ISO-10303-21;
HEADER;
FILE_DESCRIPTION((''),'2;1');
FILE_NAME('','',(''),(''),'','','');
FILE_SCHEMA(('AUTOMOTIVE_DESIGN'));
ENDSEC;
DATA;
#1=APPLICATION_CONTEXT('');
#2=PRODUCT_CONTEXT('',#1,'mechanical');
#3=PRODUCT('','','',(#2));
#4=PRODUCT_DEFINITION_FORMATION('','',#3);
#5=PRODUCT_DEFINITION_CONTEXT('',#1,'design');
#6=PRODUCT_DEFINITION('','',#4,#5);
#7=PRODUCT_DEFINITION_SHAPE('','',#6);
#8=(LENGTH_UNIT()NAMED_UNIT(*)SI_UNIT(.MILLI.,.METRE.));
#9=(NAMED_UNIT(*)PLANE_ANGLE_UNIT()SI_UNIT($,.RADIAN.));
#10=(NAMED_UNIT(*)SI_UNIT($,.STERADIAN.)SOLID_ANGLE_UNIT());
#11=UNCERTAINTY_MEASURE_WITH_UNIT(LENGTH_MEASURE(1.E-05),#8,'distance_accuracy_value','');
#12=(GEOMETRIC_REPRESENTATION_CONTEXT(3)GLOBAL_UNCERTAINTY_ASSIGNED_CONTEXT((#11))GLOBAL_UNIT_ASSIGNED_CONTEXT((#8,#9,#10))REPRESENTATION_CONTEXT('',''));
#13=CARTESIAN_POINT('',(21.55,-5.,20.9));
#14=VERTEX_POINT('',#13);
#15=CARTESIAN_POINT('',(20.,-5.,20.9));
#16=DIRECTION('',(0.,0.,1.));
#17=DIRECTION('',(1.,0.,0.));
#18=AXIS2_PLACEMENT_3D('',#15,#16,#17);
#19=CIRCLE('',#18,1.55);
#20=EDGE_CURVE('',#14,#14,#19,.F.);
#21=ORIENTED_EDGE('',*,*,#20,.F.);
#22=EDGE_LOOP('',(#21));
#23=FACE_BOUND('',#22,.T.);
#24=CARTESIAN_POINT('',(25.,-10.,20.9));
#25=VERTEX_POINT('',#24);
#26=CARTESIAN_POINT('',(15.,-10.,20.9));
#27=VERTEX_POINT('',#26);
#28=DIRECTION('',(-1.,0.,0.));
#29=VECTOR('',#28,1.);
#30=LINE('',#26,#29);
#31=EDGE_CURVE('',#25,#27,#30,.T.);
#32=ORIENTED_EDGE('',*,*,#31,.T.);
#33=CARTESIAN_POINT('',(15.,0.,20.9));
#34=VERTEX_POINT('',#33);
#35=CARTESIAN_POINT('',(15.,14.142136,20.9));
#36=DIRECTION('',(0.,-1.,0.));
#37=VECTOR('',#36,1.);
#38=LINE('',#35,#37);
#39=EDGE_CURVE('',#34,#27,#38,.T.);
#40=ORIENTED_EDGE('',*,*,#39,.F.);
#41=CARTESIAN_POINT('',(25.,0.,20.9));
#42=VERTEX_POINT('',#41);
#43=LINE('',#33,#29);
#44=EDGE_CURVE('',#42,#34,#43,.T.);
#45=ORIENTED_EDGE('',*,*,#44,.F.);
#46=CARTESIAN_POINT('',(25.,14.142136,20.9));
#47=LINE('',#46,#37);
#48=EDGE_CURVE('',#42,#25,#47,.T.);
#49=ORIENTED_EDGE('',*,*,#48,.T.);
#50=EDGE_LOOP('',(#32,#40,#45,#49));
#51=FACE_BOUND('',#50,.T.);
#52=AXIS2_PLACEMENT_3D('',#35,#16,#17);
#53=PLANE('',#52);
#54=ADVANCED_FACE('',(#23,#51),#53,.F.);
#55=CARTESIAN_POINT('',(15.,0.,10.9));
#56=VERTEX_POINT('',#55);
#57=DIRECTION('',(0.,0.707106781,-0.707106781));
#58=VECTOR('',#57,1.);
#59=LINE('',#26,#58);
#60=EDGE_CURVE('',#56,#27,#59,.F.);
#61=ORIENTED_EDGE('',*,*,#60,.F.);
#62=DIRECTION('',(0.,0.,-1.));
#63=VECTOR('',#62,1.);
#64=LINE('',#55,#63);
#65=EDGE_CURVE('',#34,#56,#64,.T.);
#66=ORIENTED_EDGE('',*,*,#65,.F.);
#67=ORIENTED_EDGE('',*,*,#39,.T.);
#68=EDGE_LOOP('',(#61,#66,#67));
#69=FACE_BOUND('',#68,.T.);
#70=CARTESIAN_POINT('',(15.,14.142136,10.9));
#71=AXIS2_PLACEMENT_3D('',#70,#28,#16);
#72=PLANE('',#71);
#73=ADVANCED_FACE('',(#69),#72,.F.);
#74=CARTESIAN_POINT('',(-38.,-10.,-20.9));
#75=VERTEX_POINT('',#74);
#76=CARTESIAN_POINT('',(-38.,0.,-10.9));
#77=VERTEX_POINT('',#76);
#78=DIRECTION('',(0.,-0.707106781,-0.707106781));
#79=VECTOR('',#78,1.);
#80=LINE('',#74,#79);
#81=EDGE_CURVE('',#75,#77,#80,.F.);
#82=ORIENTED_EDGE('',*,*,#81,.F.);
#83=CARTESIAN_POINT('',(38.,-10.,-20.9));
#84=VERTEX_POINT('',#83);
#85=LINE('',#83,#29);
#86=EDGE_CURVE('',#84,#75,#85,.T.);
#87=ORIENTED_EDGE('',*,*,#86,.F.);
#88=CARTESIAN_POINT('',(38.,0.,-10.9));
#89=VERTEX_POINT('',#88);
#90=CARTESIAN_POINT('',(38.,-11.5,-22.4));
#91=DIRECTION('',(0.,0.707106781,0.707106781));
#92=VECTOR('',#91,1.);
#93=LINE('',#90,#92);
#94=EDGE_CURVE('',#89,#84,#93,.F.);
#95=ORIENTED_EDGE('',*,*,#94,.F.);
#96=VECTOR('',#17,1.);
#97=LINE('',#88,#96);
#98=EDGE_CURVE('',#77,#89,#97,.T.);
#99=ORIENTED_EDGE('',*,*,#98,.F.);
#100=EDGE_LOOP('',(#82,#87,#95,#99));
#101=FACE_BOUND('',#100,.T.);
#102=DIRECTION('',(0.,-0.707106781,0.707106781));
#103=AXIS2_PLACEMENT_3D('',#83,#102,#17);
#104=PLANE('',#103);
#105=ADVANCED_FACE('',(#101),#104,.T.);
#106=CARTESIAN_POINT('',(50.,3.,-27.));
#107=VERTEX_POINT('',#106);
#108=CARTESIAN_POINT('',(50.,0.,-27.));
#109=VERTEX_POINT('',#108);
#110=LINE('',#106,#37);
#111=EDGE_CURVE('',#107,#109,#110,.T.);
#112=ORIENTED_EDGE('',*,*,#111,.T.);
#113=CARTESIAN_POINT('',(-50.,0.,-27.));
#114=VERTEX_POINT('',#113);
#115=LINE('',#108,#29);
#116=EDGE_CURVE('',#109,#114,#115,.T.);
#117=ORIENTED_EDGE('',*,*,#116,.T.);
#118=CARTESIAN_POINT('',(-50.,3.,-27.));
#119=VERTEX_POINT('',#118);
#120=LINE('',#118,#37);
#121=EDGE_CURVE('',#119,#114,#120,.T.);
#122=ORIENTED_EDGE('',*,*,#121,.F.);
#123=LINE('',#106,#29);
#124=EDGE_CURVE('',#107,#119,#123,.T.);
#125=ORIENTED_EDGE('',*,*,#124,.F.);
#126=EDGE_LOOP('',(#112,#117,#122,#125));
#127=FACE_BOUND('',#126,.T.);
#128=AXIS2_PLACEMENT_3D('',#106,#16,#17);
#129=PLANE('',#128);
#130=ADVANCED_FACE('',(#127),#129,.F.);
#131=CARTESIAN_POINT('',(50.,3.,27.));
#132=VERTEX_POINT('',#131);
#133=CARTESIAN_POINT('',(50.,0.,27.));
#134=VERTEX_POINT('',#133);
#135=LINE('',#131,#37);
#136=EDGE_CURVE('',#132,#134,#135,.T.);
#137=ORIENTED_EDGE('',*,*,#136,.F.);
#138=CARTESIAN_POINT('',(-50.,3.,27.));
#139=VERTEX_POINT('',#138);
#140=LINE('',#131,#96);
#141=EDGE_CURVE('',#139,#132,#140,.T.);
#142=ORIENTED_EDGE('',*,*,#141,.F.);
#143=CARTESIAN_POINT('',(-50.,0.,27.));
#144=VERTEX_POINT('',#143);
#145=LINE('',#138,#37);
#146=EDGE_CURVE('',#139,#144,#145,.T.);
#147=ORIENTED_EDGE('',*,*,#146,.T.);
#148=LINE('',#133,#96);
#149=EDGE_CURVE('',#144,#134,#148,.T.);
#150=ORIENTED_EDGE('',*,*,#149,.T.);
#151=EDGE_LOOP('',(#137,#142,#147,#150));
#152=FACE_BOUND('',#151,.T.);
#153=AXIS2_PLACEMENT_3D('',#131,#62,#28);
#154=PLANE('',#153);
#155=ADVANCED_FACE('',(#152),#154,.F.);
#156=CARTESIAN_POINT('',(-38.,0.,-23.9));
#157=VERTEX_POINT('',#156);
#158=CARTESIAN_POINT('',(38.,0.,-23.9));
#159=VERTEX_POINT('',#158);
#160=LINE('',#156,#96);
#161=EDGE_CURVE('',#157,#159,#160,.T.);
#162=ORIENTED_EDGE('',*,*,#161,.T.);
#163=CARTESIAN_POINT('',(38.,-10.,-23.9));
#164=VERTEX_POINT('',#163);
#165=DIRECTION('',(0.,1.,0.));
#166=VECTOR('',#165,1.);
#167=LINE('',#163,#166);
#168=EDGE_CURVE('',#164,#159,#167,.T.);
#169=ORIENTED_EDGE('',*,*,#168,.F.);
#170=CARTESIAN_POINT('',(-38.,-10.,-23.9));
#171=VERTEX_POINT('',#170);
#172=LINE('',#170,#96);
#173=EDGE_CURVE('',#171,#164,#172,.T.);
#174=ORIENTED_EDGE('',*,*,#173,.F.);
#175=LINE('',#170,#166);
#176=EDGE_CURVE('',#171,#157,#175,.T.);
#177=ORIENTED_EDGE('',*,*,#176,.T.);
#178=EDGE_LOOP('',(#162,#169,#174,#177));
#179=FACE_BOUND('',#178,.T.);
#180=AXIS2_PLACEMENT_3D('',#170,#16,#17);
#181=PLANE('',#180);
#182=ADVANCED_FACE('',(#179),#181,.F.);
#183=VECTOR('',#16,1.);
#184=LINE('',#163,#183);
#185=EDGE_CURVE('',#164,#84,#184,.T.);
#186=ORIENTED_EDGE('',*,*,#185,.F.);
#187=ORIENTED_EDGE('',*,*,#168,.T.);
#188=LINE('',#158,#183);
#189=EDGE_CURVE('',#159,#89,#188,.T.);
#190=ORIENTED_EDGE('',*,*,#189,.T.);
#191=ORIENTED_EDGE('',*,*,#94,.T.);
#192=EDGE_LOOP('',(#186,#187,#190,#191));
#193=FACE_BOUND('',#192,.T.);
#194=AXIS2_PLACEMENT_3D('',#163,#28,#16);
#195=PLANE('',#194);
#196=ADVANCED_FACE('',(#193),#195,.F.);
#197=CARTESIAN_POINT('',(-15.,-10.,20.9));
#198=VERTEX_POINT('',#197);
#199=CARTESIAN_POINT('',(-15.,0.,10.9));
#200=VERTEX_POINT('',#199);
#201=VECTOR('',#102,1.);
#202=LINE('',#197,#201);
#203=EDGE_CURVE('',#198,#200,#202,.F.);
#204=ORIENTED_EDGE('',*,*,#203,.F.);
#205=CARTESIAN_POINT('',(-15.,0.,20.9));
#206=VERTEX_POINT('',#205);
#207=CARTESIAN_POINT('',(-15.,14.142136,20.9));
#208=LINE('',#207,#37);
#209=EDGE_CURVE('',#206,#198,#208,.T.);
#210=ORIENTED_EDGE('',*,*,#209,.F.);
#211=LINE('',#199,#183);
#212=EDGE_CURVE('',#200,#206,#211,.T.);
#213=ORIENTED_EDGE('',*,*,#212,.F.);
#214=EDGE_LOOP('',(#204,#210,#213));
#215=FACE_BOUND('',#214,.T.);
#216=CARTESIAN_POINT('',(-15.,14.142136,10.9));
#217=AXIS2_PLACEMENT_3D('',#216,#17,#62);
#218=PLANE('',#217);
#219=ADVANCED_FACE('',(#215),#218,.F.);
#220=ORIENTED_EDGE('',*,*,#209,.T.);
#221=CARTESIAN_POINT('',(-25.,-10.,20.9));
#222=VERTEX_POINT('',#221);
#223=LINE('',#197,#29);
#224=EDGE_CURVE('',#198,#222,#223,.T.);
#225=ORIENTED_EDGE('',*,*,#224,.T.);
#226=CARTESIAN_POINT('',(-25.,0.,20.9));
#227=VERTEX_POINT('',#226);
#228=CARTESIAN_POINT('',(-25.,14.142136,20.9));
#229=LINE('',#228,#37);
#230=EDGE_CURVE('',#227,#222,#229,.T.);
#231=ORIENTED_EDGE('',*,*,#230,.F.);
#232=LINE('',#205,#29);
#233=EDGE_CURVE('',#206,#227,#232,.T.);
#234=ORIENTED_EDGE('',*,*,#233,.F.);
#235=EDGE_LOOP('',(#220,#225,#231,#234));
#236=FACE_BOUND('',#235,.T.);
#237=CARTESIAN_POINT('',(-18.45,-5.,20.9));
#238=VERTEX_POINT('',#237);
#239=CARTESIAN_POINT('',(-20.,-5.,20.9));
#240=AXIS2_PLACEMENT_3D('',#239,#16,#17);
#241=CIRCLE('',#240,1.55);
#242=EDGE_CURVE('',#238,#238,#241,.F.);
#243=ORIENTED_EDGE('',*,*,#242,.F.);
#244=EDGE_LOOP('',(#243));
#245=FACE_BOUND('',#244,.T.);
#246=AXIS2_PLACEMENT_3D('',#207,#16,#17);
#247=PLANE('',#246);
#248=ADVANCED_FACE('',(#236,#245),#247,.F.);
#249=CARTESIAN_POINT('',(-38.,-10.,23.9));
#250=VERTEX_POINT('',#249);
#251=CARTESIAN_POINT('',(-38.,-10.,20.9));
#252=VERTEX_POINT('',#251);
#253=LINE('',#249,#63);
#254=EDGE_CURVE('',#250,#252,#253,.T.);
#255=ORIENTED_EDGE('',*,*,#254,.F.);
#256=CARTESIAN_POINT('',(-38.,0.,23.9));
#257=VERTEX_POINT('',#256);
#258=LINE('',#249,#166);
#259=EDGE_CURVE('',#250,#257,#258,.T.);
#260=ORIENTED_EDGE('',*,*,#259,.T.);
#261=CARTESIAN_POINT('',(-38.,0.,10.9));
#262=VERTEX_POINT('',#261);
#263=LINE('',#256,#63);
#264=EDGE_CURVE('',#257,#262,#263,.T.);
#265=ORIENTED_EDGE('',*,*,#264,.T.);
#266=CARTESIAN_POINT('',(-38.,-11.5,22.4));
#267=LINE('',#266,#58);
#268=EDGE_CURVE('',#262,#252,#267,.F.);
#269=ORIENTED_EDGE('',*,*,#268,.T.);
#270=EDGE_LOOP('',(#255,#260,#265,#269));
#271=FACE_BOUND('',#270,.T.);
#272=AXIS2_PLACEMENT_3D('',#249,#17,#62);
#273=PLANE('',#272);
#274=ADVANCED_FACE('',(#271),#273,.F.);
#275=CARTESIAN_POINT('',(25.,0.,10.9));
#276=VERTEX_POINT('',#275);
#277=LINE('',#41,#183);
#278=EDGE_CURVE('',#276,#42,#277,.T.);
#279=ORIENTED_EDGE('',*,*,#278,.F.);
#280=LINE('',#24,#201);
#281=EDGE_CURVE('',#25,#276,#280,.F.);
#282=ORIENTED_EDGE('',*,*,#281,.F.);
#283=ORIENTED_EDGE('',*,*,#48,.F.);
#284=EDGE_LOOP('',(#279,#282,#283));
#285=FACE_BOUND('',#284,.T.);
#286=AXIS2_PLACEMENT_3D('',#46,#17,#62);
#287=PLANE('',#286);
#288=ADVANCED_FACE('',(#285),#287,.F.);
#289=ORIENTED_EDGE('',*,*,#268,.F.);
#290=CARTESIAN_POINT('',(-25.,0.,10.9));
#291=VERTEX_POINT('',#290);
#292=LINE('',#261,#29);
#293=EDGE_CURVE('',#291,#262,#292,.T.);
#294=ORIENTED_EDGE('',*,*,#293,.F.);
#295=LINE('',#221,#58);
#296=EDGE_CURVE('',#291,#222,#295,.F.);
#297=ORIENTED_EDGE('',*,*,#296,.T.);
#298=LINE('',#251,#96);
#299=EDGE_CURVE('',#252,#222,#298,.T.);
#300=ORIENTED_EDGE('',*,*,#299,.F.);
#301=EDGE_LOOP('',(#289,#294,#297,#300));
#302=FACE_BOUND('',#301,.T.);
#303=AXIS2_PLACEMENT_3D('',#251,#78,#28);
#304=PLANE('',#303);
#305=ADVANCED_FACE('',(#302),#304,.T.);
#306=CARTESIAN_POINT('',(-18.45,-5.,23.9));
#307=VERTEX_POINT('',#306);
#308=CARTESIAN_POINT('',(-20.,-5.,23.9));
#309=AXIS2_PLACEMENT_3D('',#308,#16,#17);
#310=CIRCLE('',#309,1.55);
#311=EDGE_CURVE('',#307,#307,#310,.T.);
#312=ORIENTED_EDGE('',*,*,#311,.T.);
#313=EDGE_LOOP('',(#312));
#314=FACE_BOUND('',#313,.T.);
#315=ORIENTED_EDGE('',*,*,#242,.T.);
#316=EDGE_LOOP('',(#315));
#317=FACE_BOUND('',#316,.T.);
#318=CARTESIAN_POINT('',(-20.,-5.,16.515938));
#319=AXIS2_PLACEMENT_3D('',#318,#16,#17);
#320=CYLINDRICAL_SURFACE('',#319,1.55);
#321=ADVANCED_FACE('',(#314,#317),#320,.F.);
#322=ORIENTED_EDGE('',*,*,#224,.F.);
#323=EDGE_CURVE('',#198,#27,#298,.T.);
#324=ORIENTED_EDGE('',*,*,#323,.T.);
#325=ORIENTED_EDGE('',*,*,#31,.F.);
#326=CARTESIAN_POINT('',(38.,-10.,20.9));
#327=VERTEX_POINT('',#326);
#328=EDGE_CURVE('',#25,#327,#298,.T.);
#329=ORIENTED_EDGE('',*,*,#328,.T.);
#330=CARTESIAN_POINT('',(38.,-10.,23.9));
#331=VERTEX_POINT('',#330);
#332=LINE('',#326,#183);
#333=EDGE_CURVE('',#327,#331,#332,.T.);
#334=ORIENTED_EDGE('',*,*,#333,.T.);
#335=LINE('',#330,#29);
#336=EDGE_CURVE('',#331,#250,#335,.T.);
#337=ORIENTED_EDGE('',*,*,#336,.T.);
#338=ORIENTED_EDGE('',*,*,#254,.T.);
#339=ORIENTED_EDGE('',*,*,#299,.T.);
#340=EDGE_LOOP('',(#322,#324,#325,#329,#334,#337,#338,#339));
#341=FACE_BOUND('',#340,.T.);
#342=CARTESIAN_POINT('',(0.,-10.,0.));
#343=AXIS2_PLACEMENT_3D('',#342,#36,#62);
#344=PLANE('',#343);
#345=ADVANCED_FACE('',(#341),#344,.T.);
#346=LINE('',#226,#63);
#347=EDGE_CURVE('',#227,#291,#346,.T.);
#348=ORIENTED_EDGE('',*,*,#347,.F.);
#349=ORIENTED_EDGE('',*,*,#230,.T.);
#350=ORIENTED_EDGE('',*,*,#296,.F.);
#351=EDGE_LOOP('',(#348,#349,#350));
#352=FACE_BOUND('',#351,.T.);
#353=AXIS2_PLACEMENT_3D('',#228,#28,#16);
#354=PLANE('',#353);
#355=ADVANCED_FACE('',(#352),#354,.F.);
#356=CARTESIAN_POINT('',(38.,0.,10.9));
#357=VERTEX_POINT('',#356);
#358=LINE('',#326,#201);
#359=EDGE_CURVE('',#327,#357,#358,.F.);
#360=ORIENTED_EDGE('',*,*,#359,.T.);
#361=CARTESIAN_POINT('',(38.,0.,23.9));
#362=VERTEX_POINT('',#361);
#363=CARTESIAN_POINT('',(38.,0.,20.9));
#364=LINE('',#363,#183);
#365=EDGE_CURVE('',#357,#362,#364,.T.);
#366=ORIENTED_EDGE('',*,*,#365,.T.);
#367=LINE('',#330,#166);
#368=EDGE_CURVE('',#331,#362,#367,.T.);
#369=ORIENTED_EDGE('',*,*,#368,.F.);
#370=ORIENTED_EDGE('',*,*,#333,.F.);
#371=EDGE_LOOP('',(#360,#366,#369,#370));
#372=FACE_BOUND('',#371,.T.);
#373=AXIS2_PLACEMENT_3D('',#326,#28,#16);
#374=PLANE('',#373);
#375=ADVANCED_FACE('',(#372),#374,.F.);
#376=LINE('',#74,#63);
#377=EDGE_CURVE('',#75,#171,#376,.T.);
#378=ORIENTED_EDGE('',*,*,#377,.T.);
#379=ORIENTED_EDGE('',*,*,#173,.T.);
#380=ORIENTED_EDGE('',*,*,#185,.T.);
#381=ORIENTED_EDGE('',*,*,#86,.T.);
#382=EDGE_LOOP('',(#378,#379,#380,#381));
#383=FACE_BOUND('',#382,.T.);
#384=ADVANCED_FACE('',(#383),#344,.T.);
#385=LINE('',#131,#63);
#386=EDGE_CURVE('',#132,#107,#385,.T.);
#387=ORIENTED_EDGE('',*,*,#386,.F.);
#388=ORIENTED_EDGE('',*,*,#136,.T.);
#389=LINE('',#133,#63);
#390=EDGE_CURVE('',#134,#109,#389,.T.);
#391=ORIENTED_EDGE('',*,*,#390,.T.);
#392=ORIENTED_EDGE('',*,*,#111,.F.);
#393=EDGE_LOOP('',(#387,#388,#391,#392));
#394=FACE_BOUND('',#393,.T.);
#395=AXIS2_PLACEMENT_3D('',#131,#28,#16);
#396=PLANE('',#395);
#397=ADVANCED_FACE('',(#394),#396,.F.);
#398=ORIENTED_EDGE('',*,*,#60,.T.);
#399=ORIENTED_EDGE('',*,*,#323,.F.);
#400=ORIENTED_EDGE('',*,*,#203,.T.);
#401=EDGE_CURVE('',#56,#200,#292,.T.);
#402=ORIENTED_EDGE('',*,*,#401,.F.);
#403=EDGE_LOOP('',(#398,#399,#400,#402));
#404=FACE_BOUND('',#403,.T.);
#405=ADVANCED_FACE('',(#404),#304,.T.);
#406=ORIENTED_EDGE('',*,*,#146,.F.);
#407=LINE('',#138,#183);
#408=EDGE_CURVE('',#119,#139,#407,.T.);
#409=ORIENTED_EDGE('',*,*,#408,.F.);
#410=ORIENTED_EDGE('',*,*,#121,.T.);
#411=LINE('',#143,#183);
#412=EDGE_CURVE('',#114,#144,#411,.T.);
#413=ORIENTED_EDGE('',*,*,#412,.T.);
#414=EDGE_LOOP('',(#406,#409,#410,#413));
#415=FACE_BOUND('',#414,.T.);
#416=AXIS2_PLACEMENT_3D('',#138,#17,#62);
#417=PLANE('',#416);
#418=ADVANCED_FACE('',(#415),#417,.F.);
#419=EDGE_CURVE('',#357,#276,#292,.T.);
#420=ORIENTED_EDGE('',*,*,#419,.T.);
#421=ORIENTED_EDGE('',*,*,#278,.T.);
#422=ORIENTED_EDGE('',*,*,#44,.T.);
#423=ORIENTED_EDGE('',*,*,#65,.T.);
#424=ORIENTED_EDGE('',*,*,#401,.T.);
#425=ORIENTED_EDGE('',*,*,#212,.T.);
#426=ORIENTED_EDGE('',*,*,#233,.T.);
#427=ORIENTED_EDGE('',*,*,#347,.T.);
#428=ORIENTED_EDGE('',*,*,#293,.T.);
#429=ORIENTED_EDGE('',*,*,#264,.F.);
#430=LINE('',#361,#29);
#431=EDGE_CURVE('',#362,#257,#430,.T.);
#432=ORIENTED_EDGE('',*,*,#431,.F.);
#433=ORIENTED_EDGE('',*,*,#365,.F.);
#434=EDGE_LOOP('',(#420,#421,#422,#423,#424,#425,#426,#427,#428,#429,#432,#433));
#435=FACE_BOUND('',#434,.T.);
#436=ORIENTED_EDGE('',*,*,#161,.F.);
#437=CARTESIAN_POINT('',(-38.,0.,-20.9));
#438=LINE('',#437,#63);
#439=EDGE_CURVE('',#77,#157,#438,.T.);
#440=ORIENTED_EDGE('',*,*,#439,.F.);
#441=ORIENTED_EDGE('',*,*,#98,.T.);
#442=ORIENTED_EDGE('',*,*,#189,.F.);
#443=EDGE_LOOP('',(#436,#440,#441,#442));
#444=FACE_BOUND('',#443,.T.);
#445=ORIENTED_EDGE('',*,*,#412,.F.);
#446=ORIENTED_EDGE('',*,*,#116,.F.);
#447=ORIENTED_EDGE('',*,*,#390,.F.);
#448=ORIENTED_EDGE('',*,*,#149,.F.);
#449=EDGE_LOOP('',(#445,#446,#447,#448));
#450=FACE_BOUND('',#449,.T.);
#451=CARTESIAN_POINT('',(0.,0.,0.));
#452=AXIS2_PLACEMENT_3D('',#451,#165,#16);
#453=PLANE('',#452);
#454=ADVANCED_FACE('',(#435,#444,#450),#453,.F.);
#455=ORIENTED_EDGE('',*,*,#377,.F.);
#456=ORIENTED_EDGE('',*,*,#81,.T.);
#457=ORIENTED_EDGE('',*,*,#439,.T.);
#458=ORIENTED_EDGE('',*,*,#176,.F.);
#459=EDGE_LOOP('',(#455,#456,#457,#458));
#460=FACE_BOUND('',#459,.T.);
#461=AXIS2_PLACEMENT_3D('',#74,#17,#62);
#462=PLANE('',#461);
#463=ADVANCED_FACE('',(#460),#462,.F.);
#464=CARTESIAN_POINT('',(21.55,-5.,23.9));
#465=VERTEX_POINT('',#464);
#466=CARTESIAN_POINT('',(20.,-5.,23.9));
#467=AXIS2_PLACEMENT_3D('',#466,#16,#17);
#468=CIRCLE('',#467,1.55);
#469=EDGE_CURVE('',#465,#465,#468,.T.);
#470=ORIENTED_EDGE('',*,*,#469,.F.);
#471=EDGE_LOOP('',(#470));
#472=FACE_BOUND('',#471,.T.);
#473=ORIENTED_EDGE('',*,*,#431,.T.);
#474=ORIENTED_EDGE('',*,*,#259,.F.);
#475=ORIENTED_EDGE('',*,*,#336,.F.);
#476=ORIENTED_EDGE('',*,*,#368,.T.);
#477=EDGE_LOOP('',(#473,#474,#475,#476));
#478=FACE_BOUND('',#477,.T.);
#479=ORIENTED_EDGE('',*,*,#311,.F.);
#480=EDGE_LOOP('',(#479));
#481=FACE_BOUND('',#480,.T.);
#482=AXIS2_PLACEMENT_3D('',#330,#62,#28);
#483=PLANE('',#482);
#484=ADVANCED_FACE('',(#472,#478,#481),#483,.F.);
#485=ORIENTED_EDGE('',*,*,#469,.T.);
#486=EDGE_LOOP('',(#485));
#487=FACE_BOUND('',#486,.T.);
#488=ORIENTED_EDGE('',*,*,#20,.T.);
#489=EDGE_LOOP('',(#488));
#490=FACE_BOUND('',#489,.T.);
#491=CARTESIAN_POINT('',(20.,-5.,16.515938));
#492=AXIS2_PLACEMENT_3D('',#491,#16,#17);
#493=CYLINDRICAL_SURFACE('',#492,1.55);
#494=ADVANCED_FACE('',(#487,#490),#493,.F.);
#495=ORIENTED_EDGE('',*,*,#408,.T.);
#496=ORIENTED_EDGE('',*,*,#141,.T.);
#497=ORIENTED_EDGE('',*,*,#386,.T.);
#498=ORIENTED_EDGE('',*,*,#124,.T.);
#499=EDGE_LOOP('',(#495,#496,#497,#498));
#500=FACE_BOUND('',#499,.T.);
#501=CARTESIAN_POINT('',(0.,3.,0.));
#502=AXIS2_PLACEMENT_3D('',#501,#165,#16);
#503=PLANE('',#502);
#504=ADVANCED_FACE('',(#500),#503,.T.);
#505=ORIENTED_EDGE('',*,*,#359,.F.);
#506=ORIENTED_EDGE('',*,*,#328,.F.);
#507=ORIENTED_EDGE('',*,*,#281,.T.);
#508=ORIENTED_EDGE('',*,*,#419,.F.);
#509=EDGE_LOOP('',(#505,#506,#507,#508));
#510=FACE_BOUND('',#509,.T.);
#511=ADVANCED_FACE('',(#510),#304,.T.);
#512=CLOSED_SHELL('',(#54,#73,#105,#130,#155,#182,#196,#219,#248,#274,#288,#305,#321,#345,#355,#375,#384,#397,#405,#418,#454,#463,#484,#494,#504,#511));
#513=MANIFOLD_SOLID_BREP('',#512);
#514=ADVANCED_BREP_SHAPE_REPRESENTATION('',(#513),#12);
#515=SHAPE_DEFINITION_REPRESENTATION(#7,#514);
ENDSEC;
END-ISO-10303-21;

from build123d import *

# Parameters (mm, degrees)
SKETCH1_W           = 100
SKETCH1_H           = 54
BOSS_EXTRUDE1_DEPTH = 3
SKETCH2_W           = 76
SKETCH2_H           = 3
BOSS_EXTRUDE2_DEPTH = 10
CHAMFER1_SIZE       = 10
SKETCH3_W           = 10
SKETCH3_H           = 10
CUT_EXTRUDE1_DEPTH  = 10
SKETCH4_R           = 1.55
CUT_EXTRUDE2_DEPTH  = 3


with BuildPart() as part:
    # Sketch1 → Boss-Extrude1 (new body)
    with BuildSketch(Plane(origin=(0, 0, 0), x_dir=(1, 0, 0), z_dir=(0, 1, 0))):
        Rectangle(SKETCH1_W, SKETCH1_H)
    extrude(amount=BOSS_EXTRUDE1_DEPTH)

    # Sketch2 → Boss-Extrude2 (add)
    with BuildSketch(Plane.XZ):
        with Locations((0, 22.4)):
            Rectangle(SKETCH2_W, SKETCH2_H)
        with Locations((0, -22.4)):
            Rectangle(SKETCH2_W, SKETCH2_H)
    extrude(amount=BOSS_EXTRUDE2_DEPTH)

    # Chamfer1
    chamfer1_edges = [part.edges().sort_by_distance(p)[0] for p in [
        (0, 0, -20.9),
        (0, 0, 20.9),
    ]]
    chamfer(chamfer1_edges, length=CHAMFER1_SIZE - 0.0001)  # a hair under: the kernel refuses the full size

    # Sketch3 → Cut-Extrude1 (cut)
    with BuildSketch(Plane.XZ.offset(10)):
        with Locations((-20, 15.9)):
            Rectangle(SKETCH3_W, SKETCH3_H)
        with Locations((20, 15.9)):
            Rectangle(SKETCH3_W, SKETCH3_H)
    extrude(amount=-CUT_EXTRUDE1_DEPTH, mode=Mode.SUBTRACT)

    # Sketch4 → Cut-Extrude2 (cut)
    with BuildSketch(Plane.XY.offset(23.9)):
        with Locations((-20, -5)):
            Circle(SKETCH4_R)
        with Locations((20, -5)):
            Circle(SKETCH4_R)
    extrude(amount=-CUT_EXTRUDE2_DEPTH, mode=Mode.SUBTRACT)


solid = part.part
